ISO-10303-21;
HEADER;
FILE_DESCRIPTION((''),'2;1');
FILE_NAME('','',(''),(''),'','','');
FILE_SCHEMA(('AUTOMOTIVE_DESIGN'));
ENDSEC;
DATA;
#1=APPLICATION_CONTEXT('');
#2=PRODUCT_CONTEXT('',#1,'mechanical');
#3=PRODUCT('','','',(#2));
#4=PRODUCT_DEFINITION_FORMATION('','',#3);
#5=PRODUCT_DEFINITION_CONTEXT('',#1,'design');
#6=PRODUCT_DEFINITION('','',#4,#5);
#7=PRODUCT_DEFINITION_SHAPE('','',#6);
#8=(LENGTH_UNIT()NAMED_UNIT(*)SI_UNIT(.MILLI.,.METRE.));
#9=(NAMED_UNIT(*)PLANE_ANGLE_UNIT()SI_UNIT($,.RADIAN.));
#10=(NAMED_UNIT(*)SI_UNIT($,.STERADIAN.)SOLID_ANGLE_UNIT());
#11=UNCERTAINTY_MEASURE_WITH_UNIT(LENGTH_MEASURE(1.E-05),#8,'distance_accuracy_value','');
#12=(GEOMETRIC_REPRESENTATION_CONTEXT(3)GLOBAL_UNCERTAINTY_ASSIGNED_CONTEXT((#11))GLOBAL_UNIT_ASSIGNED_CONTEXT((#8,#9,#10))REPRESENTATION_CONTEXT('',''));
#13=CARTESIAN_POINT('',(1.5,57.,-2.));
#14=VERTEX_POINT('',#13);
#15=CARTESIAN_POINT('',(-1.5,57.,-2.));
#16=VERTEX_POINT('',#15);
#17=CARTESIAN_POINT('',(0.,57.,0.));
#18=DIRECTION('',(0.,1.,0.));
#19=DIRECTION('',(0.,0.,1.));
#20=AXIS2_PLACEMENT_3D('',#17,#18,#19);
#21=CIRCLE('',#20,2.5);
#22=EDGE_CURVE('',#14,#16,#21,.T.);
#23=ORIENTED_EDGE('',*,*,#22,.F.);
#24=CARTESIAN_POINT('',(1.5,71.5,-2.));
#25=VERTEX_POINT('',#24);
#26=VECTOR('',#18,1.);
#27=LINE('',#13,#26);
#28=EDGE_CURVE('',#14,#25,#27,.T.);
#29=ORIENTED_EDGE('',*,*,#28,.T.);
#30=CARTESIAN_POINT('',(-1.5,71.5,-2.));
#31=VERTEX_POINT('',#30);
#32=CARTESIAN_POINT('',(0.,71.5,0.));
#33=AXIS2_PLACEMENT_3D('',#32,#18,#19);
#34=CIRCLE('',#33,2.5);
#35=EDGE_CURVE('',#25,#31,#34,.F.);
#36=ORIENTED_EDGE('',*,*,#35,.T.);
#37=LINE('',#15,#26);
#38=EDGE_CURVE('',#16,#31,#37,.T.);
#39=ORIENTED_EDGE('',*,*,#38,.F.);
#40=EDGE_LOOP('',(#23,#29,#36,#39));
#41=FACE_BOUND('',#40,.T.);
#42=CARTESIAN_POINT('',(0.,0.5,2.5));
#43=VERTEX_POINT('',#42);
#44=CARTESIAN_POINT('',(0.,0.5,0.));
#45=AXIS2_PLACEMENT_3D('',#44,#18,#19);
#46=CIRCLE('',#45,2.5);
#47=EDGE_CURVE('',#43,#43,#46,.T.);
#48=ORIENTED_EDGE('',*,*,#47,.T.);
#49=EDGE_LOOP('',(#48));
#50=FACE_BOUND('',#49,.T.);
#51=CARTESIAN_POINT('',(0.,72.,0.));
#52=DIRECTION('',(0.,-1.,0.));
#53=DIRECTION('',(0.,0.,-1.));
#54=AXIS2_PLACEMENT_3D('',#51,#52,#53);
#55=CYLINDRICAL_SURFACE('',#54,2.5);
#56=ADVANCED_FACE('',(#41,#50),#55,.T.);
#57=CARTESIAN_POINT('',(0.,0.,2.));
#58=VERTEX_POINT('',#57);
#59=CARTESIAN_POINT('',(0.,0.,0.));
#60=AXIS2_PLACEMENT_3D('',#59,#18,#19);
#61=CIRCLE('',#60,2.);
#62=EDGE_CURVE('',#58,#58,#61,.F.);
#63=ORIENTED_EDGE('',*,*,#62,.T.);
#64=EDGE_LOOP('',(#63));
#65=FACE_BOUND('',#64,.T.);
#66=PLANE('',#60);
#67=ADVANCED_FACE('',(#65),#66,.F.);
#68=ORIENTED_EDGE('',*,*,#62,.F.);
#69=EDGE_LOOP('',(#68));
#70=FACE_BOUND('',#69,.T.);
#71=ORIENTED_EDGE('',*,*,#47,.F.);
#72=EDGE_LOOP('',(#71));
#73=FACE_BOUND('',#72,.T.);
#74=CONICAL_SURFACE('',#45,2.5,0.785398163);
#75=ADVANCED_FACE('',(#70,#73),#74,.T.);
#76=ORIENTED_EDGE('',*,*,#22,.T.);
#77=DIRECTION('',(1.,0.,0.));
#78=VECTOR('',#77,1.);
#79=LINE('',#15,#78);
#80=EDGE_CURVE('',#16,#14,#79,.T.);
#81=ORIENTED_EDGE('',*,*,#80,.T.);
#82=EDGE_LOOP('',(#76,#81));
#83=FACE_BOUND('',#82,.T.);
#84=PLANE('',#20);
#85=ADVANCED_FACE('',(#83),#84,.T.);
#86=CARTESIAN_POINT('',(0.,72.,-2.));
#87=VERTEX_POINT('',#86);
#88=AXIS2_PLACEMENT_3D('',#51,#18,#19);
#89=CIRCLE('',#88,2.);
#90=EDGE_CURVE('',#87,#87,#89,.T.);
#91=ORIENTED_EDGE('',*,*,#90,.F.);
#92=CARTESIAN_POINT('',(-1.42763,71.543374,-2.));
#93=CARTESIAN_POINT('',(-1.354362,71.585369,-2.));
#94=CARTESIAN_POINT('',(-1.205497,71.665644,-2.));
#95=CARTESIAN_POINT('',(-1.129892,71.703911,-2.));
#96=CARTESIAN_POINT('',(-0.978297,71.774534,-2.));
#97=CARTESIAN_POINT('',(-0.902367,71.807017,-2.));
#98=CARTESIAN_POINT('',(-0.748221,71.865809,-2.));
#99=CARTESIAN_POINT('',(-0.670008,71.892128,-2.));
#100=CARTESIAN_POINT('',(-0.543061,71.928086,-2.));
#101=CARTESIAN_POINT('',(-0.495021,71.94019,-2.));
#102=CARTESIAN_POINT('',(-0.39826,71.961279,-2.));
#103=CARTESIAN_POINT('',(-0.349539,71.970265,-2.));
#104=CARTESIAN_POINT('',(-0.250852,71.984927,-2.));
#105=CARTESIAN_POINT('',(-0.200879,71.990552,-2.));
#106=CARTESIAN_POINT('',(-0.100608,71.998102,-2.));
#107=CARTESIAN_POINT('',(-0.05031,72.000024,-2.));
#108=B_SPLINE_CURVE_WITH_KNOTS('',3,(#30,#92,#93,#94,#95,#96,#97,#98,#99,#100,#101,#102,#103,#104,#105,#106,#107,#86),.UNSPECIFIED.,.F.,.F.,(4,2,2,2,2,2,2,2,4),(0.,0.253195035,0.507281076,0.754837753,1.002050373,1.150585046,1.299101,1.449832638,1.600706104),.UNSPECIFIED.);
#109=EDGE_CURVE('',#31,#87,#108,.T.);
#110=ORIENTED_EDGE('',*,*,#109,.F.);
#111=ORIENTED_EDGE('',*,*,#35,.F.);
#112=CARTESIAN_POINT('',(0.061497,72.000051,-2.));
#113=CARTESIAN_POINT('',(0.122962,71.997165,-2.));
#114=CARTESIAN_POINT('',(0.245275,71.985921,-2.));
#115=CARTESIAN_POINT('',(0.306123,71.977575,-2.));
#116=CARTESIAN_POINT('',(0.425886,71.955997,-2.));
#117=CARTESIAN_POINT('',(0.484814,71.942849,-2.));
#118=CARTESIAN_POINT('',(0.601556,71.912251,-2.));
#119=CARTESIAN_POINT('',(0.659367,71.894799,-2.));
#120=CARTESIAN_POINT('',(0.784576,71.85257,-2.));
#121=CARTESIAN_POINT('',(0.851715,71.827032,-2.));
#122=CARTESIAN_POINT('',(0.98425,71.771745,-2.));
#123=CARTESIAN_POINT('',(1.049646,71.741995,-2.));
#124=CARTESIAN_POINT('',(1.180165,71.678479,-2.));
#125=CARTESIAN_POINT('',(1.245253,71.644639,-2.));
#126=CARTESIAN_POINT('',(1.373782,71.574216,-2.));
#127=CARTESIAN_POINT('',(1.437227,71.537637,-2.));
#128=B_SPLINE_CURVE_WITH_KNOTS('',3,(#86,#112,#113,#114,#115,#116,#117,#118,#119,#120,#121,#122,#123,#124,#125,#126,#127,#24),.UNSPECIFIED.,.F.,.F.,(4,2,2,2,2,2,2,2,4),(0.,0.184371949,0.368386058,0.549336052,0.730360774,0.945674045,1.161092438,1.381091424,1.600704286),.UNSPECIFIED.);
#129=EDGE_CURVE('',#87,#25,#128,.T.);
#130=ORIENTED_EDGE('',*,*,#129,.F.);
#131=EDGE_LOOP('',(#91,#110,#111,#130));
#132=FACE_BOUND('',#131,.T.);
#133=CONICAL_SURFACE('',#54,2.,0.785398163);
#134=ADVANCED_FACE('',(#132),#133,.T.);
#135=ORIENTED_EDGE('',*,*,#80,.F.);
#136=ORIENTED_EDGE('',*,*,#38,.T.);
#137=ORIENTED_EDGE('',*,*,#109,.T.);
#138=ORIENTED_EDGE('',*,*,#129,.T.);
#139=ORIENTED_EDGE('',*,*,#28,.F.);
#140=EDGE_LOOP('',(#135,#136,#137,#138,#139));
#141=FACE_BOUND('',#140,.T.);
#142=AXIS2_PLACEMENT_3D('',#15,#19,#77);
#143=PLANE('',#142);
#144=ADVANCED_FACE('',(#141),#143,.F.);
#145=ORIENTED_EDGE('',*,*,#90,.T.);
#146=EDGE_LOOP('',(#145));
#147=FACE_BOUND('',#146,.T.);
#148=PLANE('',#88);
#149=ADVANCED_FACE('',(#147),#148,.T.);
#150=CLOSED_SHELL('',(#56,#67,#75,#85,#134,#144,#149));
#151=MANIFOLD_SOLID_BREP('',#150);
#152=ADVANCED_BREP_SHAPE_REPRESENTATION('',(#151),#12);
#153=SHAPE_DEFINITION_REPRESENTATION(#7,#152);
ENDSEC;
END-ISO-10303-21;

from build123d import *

# Parameters (mm, degrees)
SKETCH_1_R          = 2.5
EXTRUDE_1_DEPTH     = 72
CUT_EXTRUDE_START   = -15
CUT_EXTRUDE_1_DEPTH = 15
CHAMFER_1_SIZE      = 0.5


with BuildPart() as part:
    # Эскиз1 → Бобышка-Вытянуть1 (new body)
    with BuildSketch(Plane(origin=(0, 0, 0), x_dir=(1, 0, 0), z_dir=(0, 1, 0))):
        with Locations(Location((0, 0, 0), (0, 0, 270))):
            Circle(SKETCH_1_R)
    extrude(amount=EXTRUDE_1_DEPTH)

    # Эскиз2 → Вырез-Вытянуть1 (cut)
    with BuildSketch(Plane(origin=(0, 72, 0), x_dir=(1, 0, 0), z_dir=(0, 1, 0)).offset(CUT_EXTRUDE_START)):
        with BuildLine():
            Line((-1.5, 2), (1.5, 2))
            ThreePointArc((1.5, 2), (0, 2.5), (-1.5, 2))
        make_face()
    extrude(amount=CUT_EXTRUDE_1_DEPTH, mode=Mode.SUBTRACT)

    # Фаска1
    chamfer_1_edges = [part.edges().sort_by_distance(p)[0] for p in [
        (-2.371708245, 72, 0.790569415),
        (0, 0, -2.5),
    ]]
    chamfer(chamfer_1_edges, length=CHAMFER_1_SIZE - 0.0001)  # a hair under: the kernel refuses the full size


solid = part.part
